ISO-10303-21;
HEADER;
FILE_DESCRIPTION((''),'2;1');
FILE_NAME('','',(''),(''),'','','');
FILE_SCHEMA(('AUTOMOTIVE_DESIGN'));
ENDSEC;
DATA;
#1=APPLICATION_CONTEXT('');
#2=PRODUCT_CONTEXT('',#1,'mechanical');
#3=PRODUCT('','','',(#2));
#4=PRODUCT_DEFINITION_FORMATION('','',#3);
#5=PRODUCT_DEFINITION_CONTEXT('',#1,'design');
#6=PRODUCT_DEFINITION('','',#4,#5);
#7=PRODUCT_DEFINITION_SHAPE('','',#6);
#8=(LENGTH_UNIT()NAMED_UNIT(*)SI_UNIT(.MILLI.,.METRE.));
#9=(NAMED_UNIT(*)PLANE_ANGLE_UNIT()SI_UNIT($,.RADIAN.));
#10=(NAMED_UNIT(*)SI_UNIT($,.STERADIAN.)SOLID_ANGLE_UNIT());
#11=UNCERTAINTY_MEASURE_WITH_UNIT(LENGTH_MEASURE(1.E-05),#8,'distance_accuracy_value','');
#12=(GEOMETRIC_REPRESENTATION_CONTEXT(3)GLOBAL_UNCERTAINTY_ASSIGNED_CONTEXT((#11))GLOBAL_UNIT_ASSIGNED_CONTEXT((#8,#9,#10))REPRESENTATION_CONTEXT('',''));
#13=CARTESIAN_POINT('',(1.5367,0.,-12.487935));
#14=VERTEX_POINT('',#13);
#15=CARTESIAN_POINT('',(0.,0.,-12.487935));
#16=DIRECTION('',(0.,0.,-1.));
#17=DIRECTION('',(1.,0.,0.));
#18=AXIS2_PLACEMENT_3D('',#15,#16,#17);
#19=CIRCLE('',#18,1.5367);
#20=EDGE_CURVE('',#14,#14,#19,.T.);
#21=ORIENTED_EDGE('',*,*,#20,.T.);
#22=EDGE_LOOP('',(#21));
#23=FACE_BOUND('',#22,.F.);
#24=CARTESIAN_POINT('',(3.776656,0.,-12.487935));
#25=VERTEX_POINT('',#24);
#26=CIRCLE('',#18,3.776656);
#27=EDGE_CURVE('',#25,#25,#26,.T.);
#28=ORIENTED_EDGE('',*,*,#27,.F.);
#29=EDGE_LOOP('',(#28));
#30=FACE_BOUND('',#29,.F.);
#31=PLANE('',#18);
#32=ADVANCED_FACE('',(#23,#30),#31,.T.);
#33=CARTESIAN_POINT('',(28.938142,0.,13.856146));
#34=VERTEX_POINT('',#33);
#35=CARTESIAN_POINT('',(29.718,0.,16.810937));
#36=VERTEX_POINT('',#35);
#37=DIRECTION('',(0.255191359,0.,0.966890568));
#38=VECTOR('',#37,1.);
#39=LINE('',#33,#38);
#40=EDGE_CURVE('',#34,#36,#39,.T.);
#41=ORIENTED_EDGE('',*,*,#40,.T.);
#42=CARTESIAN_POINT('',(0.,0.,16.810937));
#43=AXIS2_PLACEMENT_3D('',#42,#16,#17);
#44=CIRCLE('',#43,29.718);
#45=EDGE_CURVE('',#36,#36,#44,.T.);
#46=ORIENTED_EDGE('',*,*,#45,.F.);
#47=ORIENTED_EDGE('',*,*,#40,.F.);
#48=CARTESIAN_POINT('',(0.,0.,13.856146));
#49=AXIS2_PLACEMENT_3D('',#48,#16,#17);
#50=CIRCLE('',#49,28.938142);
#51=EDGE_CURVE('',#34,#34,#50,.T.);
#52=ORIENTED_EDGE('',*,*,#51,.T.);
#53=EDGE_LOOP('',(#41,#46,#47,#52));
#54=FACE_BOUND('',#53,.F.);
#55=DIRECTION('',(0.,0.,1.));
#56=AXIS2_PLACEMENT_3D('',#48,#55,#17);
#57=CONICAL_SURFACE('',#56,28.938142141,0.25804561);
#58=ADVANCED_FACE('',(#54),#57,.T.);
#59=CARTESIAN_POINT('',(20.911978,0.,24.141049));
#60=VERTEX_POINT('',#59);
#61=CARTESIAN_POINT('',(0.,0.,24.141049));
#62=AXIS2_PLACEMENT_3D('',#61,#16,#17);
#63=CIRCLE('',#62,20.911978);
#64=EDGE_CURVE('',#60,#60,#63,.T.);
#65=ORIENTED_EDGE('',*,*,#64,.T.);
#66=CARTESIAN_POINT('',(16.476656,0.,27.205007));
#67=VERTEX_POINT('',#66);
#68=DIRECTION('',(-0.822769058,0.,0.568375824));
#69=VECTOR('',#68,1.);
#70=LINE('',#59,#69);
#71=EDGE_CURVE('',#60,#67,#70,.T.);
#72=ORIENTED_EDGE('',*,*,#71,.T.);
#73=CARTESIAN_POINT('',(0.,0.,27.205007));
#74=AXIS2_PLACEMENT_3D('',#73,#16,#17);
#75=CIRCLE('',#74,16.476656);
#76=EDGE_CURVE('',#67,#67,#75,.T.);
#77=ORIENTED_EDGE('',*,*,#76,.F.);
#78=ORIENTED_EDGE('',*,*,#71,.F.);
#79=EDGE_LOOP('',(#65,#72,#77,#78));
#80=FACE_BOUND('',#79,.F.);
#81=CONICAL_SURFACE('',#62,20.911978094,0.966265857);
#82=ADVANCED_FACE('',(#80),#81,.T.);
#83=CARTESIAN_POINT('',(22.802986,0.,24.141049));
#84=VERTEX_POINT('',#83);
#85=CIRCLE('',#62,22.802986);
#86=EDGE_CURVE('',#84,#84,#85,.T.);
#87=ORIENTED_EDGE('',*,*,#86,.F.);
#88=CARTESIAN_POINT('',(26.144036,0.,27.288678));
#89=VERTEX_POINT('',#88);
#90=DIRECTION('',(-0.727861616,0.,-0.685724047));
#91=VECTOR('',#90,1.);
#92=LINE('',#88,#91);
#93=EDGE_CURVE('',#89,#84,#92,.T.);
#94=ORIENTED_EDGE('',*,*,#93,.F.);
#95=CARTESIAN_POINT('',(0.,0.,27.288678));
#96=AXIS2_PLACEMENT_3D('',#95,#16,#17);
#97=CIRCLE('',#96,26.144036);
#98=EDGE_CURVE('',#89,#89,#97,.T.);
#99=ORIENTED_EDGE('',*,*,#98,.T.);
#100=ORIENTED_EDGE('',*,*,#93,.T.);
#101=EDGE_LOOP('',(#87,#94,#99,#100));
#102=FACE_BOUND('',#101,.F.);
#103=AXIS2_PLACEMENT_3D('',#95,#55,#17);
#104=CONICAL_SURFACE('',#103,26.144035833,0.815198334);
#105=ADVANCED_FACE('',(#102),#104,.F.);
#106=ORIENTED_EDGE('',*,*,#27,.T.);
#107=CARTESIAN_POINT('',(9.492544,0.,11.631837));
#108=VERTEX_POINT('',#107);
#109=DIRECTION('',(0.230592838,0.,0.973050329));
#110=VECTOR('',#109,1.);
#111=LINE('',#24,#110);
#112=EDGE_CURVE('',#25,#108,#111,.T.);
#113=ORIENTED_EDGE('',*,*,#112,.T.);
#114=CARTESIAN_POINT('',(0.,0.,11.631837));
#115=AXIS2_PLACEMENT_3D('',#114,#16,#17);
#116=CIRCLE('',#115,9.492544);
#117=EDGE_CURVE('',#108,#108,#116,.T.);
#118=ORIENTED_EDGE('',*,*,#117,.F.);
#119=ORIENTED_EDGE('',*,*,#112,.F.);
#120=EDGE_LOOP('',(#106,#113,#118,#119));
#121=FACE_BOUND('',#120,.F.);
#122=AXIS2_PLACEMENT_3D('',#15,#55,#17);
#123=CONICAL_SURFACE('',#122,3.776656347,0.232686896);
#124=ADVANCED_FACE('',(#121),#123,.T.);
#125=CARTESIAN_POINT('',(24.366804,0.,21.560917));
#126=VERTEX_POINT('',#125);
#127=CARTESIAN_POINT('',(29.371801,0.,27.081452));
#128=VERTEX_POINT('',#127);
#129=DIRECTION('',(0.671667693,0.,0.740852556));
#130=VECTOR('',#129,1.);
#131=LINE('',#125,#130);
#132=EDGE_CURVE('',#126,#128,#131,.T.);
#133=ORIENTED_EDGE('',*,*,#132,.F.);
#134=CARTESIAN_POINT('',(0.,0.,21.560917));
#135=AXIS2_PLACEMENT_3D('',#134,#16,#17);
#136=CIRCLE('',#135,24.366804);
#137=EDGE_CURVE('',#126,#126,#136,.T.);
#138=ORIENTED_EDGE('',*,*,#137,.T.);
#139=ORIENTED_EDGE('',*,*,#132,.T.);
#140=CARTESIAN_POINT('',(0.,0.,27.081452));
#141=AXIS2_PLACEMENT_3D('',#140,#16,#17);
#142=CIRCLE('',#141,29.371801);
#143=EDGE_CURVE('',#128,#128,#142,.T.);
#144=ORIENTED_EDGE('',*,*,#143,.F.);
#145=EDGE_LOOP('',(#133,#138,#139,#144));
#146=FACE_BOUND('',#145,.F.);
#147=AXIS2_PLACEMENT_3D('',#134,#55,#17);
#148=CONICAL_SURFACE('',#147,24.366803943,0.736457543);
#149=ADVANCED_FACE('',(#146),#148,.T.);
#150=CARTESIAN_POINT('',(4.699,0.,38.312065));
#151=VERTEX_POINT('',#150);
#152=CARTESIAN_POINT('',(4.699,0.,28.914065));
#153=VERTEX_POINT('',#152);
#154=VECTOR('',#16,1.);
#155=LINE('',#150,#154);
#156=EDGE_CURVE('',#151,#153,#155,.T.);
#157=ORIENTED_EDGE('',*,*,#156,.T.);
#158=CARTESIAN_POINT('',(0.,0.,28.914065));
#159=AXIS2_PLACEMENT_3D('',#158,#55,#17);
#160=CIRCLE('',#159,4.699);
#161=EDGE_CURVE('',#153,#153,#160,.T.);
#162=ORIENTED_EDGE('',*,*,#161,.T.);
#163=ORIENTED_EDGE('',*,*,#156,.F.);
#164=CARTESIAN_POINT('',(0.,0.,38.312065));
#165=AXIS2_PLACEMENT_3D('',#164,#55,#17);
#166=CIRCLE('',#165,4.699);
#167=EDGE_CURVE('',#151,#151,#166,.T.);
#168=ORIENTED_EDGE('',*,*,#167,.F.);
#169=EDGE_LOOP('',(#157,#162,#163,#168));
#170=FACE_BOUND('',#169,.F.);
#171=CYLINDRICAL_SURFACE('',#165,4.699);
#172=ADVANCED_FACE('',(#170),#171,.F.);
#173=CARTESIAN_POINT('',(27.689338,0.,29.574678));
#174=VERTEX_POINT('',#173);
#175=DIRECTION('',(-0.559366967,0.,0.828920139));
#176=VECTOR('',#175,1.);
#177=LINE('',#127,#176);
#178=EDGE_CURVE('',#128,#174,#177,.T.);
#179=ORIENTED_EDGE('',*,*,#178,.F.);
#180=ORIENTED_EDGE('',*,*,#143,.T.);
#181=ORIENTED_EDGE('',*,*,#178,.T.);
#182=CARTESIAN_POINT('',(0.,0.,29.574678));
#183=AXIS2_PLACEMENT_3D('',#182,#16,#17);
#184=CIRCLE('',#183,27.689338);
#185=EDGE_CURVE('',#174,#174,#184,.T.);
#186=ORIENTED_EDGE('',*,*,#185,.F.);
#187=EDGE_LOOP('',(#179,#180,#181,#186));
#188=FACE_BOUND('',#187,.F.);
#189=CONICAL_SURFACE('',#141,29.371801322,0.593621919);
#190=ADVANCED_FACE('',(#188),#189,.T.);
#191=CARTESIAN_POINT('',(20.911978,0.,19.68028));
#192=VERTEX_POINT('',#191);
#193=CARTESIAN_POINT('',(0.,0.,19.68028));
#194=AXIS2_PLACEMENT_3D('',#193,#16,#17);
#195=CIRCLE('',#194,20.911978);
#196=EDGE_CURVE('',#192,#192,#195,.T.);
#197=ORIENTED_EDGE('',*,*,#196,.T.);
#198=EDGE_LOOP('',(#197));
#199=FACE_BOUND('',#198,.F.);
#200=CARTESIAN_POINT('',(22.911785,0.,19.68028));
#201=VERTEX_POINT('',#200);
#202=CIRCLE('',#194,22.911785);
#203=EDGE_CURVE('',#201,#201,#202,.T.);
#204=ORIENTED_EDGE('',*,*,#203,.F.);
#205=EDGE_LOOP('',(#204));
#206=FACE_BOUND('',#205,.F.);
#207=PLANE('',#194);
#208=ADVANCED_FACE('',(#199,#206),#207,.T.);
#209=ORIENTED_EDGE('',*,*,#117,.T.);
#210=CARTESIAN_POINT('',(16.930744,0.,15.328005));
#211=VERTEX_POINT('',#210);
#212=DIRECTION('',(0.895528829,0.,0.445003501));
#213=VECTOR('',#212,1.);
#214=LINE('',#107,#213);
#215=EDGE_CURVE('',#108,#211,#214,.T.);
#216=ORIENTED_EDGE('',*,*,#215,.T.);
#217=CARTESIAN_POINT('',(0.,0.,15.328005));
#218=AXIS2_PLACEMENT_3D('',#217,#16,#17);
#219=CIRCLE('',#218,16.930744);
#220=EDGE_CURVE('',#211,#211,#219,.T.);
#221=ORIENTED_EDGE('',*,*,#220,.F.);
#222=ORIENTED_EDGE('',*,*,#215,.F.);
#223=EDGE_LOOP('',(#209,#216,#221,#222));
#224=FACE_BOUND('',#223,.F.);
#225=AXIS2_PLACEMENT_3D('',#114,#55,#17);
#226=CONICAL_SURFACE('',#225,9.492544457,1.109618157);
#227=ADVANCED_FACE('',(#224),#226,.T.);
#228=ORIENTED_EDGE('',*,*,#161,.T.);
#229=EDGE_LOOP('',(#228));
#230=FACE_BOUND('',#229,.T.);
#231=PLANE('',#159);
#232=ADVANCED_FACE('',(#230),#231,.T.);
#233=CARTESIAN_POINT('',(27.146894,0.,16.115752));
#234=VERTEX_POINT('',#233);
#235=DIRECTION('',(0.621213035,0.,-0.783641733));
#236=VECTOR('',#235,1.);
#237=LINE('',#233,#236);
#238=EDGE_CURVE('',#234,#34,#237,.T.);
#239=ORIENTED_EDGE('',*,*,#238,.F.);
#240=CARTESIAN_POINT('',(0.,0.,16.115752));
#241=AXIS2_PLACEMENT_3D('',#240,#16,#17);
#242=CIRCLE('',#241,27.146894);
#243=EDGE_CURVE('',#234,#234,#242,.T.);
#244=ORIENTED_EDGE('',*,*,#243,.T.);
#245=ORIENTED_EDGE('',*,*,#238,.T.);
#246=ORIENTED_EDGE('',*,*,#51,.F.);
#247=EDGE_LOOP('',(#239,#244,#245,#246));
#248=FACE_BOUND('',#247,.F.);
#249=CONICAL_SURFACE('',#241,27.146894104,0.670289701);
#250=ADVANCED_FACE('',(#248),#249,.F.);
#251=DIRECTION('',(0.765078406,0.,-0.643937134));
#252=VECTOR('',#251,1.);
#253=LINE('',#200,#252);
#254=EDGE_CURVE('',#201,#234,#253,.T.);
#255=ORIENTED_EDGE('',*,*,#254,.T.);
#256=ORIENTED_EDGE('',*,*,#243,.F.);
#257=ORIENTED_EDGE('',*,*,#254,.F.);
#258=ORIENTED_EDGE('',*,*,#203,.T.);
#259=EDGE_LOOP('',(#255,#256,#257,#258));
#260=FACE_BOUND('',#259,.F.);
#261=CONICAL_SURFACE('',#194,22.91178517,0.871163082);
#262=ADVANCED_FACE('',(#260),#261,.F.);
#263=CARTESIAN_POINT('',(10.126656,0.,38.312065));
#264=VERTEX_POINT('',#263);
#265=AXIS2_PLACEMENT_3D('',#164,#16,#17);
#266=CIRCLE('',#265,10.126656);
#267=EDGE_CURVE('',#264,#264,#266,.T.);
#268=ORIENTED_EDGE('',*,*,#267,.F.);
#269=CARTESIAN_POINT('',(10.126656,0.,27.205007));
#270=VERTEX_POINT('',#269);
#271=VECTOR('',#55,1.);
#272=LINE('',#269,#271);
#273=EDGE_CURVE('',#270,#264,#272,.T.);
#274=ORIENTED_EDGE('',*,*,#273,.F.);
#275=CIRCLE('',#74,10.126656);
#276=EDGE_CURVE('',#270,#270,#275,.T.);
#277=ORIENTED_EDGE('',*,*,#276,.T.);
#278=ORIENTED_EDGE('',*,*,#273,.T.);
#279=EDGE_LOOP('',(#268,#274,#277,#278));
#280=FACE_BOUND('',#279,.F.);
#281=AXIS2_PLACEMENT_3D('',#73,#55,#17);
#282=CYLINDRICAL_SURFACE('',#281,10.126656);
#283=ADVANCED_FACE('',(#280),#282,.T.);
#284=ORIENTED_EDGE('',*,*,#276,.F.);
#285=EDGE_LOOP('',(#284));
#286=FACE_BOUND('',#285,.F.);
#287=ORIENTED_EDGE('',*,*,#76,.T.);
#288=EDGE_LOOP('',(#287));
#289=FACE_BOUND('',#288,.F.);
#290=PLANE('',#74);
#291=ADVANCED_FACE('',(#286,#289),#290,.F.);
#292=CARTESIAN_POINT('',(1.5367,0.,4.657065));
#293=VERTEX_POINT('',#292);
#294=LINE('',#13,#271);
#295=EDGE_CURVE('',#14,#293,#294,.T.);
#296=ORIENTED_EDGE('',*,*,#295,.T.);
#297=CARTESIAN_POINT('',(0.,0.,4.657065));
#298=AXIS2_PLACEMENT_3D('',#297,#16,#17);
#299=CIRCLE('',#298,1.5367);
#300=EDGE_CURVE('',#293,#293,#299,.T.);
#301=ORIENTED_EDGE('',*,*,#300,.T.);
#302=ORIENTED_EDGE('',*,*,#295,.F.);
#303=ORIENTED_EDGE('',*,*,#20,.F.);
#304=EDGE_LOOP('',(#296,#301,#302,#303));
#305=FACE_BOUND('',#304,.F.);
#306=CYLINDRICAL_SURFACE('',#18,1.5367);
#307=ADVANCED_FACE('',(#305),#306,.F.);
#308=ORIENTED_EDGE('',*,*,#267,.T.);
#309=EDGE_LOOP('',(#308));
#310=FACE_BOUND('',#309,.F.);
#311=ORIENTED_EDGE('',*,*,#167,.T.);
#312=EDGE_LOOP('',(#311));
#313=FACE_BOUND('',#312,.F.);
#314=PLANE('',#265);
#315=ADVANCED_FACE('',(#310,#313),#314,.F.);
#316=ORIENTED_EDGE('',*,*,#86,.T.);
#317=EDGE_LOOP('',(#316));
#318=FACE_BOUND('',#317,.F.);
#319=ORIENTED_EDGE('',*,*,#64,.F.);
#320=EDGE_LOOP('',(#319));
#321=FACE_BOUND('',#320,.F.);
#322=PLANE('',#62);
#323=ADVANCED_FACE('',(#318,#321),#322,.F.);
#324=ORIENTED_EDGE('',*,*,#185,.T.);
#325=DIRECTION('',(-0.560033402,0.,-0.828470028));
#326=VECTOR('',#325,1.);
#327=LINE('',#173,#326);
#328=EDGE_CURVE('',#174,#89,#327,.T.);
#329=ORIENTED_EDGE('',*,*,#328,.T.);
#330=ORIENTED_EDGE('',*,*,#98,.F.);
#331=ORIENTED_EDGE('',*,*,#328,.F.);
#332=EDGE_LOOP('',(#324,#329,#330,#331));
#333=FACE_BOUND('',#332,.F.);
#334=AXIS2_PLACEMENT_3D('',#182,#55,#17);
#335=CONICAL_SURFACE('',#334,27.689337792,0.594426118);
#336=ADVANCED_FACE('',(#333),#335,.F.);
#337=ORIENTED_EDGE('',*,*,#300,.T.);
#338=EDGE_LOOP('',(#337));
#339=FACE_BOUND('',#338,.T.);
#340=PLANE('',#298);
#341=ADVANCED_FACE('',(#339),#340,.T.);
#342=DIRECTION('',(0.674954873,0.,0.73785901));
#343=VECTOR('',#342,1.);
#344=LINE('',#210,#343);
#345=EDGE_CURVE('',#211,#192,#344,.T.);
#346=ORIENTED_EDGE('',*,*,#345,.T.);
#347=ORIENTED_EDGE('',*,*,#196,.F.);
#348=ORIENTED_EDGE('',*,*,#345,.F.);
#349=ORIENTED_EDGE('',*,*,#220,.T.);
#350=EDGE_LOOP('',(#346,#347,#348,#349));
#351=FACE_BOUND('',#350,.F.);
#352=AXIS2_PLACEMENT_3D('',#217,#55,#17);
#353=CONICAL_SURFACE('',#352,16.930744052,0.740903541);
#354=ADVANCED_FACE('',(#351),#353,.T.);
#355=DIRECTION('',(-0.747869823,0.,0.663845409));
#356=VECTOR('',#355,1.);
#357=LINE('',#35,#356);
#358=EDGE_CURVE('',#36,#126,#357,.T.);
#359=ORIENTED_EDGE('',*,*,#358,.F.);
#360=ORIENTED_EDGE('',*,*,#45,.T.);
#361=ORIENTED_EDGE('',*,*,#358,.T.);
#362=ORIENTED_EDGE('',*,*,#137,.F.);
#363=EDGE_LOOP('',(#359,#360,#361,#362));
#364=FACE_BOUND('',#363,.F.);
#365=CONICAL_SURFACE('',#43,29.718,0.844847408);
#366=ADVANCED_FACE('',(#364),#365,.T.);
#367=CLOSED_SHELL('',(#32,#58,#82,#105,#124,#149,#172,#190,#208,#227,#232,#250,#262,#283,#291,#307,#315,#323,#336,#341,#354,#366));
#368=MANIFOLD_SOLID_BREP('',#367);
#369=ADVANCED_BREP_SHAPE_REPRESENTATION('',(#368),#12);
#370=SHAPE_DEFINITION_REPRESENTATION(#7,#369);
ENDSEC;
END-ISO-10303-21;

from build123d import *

# Parameters (mm, degrees)
F2_R     = 4.699
F3_DEPTH = 9.398
F4_R     = 1.5367
F5_DEPTH = 17.145


# Not quite as in the source:
# - a feature names something its author has since deleted; it is built from what else it names


with BuildPart() as f1:
    # F0 (on Front) → F1 (revolve)
    with BuildSketch(Plane.XZ):
        Polygon((0, 27.8836265206), (0, -12.487935467), (3.7766563474, -12.487935467), (9.4925444573, 11.6318371147), (16.9307440519, 15.3280049562), (20.9119780944, 19.6802802384), (22.9117851704, 19.6802802384), (27.146894104, 16.1157515753), (28.938142141, 13.8561455533), (29.718, 16.8109368533), (24.366803943, 21.5609171673), (29.371801322, 27.0814523101), (27.6893377921, 29.5746776597), (26.144035833, 27.2886776597), (22.8029862046, 24.1410490125), (20.9119780944, 24.1410490125), (16.4766563474, 27.2050067903), (10.1266563474, 27.2050067903), (10.1266563474, 38.312064533), (0, 38.312064533), align=None)
    revolve(axis=Axis((0, 0, 7.6978455268), (0, 0, -1)))

    # F2 (on face) → F3 (cut)
    with BuildSketch(Plane.XY.offset(38.312064533)):
        Circle(F2_R)
    extrude(amount=-F3_DEPTH, mode=Mode.SUBTRACT)

    # F4 (on face) → F5 (cut)
    with BuildSketch(Plane(origin=(0, 0, -12.487935467), x_dir=(1, 0, 0), z_dir=(0, 0, -1))):
        Circle(F4_R)
    extrude(amount=-F5_DEPTH, mode=Mode.SUBTRACT)


solid = f1.part
